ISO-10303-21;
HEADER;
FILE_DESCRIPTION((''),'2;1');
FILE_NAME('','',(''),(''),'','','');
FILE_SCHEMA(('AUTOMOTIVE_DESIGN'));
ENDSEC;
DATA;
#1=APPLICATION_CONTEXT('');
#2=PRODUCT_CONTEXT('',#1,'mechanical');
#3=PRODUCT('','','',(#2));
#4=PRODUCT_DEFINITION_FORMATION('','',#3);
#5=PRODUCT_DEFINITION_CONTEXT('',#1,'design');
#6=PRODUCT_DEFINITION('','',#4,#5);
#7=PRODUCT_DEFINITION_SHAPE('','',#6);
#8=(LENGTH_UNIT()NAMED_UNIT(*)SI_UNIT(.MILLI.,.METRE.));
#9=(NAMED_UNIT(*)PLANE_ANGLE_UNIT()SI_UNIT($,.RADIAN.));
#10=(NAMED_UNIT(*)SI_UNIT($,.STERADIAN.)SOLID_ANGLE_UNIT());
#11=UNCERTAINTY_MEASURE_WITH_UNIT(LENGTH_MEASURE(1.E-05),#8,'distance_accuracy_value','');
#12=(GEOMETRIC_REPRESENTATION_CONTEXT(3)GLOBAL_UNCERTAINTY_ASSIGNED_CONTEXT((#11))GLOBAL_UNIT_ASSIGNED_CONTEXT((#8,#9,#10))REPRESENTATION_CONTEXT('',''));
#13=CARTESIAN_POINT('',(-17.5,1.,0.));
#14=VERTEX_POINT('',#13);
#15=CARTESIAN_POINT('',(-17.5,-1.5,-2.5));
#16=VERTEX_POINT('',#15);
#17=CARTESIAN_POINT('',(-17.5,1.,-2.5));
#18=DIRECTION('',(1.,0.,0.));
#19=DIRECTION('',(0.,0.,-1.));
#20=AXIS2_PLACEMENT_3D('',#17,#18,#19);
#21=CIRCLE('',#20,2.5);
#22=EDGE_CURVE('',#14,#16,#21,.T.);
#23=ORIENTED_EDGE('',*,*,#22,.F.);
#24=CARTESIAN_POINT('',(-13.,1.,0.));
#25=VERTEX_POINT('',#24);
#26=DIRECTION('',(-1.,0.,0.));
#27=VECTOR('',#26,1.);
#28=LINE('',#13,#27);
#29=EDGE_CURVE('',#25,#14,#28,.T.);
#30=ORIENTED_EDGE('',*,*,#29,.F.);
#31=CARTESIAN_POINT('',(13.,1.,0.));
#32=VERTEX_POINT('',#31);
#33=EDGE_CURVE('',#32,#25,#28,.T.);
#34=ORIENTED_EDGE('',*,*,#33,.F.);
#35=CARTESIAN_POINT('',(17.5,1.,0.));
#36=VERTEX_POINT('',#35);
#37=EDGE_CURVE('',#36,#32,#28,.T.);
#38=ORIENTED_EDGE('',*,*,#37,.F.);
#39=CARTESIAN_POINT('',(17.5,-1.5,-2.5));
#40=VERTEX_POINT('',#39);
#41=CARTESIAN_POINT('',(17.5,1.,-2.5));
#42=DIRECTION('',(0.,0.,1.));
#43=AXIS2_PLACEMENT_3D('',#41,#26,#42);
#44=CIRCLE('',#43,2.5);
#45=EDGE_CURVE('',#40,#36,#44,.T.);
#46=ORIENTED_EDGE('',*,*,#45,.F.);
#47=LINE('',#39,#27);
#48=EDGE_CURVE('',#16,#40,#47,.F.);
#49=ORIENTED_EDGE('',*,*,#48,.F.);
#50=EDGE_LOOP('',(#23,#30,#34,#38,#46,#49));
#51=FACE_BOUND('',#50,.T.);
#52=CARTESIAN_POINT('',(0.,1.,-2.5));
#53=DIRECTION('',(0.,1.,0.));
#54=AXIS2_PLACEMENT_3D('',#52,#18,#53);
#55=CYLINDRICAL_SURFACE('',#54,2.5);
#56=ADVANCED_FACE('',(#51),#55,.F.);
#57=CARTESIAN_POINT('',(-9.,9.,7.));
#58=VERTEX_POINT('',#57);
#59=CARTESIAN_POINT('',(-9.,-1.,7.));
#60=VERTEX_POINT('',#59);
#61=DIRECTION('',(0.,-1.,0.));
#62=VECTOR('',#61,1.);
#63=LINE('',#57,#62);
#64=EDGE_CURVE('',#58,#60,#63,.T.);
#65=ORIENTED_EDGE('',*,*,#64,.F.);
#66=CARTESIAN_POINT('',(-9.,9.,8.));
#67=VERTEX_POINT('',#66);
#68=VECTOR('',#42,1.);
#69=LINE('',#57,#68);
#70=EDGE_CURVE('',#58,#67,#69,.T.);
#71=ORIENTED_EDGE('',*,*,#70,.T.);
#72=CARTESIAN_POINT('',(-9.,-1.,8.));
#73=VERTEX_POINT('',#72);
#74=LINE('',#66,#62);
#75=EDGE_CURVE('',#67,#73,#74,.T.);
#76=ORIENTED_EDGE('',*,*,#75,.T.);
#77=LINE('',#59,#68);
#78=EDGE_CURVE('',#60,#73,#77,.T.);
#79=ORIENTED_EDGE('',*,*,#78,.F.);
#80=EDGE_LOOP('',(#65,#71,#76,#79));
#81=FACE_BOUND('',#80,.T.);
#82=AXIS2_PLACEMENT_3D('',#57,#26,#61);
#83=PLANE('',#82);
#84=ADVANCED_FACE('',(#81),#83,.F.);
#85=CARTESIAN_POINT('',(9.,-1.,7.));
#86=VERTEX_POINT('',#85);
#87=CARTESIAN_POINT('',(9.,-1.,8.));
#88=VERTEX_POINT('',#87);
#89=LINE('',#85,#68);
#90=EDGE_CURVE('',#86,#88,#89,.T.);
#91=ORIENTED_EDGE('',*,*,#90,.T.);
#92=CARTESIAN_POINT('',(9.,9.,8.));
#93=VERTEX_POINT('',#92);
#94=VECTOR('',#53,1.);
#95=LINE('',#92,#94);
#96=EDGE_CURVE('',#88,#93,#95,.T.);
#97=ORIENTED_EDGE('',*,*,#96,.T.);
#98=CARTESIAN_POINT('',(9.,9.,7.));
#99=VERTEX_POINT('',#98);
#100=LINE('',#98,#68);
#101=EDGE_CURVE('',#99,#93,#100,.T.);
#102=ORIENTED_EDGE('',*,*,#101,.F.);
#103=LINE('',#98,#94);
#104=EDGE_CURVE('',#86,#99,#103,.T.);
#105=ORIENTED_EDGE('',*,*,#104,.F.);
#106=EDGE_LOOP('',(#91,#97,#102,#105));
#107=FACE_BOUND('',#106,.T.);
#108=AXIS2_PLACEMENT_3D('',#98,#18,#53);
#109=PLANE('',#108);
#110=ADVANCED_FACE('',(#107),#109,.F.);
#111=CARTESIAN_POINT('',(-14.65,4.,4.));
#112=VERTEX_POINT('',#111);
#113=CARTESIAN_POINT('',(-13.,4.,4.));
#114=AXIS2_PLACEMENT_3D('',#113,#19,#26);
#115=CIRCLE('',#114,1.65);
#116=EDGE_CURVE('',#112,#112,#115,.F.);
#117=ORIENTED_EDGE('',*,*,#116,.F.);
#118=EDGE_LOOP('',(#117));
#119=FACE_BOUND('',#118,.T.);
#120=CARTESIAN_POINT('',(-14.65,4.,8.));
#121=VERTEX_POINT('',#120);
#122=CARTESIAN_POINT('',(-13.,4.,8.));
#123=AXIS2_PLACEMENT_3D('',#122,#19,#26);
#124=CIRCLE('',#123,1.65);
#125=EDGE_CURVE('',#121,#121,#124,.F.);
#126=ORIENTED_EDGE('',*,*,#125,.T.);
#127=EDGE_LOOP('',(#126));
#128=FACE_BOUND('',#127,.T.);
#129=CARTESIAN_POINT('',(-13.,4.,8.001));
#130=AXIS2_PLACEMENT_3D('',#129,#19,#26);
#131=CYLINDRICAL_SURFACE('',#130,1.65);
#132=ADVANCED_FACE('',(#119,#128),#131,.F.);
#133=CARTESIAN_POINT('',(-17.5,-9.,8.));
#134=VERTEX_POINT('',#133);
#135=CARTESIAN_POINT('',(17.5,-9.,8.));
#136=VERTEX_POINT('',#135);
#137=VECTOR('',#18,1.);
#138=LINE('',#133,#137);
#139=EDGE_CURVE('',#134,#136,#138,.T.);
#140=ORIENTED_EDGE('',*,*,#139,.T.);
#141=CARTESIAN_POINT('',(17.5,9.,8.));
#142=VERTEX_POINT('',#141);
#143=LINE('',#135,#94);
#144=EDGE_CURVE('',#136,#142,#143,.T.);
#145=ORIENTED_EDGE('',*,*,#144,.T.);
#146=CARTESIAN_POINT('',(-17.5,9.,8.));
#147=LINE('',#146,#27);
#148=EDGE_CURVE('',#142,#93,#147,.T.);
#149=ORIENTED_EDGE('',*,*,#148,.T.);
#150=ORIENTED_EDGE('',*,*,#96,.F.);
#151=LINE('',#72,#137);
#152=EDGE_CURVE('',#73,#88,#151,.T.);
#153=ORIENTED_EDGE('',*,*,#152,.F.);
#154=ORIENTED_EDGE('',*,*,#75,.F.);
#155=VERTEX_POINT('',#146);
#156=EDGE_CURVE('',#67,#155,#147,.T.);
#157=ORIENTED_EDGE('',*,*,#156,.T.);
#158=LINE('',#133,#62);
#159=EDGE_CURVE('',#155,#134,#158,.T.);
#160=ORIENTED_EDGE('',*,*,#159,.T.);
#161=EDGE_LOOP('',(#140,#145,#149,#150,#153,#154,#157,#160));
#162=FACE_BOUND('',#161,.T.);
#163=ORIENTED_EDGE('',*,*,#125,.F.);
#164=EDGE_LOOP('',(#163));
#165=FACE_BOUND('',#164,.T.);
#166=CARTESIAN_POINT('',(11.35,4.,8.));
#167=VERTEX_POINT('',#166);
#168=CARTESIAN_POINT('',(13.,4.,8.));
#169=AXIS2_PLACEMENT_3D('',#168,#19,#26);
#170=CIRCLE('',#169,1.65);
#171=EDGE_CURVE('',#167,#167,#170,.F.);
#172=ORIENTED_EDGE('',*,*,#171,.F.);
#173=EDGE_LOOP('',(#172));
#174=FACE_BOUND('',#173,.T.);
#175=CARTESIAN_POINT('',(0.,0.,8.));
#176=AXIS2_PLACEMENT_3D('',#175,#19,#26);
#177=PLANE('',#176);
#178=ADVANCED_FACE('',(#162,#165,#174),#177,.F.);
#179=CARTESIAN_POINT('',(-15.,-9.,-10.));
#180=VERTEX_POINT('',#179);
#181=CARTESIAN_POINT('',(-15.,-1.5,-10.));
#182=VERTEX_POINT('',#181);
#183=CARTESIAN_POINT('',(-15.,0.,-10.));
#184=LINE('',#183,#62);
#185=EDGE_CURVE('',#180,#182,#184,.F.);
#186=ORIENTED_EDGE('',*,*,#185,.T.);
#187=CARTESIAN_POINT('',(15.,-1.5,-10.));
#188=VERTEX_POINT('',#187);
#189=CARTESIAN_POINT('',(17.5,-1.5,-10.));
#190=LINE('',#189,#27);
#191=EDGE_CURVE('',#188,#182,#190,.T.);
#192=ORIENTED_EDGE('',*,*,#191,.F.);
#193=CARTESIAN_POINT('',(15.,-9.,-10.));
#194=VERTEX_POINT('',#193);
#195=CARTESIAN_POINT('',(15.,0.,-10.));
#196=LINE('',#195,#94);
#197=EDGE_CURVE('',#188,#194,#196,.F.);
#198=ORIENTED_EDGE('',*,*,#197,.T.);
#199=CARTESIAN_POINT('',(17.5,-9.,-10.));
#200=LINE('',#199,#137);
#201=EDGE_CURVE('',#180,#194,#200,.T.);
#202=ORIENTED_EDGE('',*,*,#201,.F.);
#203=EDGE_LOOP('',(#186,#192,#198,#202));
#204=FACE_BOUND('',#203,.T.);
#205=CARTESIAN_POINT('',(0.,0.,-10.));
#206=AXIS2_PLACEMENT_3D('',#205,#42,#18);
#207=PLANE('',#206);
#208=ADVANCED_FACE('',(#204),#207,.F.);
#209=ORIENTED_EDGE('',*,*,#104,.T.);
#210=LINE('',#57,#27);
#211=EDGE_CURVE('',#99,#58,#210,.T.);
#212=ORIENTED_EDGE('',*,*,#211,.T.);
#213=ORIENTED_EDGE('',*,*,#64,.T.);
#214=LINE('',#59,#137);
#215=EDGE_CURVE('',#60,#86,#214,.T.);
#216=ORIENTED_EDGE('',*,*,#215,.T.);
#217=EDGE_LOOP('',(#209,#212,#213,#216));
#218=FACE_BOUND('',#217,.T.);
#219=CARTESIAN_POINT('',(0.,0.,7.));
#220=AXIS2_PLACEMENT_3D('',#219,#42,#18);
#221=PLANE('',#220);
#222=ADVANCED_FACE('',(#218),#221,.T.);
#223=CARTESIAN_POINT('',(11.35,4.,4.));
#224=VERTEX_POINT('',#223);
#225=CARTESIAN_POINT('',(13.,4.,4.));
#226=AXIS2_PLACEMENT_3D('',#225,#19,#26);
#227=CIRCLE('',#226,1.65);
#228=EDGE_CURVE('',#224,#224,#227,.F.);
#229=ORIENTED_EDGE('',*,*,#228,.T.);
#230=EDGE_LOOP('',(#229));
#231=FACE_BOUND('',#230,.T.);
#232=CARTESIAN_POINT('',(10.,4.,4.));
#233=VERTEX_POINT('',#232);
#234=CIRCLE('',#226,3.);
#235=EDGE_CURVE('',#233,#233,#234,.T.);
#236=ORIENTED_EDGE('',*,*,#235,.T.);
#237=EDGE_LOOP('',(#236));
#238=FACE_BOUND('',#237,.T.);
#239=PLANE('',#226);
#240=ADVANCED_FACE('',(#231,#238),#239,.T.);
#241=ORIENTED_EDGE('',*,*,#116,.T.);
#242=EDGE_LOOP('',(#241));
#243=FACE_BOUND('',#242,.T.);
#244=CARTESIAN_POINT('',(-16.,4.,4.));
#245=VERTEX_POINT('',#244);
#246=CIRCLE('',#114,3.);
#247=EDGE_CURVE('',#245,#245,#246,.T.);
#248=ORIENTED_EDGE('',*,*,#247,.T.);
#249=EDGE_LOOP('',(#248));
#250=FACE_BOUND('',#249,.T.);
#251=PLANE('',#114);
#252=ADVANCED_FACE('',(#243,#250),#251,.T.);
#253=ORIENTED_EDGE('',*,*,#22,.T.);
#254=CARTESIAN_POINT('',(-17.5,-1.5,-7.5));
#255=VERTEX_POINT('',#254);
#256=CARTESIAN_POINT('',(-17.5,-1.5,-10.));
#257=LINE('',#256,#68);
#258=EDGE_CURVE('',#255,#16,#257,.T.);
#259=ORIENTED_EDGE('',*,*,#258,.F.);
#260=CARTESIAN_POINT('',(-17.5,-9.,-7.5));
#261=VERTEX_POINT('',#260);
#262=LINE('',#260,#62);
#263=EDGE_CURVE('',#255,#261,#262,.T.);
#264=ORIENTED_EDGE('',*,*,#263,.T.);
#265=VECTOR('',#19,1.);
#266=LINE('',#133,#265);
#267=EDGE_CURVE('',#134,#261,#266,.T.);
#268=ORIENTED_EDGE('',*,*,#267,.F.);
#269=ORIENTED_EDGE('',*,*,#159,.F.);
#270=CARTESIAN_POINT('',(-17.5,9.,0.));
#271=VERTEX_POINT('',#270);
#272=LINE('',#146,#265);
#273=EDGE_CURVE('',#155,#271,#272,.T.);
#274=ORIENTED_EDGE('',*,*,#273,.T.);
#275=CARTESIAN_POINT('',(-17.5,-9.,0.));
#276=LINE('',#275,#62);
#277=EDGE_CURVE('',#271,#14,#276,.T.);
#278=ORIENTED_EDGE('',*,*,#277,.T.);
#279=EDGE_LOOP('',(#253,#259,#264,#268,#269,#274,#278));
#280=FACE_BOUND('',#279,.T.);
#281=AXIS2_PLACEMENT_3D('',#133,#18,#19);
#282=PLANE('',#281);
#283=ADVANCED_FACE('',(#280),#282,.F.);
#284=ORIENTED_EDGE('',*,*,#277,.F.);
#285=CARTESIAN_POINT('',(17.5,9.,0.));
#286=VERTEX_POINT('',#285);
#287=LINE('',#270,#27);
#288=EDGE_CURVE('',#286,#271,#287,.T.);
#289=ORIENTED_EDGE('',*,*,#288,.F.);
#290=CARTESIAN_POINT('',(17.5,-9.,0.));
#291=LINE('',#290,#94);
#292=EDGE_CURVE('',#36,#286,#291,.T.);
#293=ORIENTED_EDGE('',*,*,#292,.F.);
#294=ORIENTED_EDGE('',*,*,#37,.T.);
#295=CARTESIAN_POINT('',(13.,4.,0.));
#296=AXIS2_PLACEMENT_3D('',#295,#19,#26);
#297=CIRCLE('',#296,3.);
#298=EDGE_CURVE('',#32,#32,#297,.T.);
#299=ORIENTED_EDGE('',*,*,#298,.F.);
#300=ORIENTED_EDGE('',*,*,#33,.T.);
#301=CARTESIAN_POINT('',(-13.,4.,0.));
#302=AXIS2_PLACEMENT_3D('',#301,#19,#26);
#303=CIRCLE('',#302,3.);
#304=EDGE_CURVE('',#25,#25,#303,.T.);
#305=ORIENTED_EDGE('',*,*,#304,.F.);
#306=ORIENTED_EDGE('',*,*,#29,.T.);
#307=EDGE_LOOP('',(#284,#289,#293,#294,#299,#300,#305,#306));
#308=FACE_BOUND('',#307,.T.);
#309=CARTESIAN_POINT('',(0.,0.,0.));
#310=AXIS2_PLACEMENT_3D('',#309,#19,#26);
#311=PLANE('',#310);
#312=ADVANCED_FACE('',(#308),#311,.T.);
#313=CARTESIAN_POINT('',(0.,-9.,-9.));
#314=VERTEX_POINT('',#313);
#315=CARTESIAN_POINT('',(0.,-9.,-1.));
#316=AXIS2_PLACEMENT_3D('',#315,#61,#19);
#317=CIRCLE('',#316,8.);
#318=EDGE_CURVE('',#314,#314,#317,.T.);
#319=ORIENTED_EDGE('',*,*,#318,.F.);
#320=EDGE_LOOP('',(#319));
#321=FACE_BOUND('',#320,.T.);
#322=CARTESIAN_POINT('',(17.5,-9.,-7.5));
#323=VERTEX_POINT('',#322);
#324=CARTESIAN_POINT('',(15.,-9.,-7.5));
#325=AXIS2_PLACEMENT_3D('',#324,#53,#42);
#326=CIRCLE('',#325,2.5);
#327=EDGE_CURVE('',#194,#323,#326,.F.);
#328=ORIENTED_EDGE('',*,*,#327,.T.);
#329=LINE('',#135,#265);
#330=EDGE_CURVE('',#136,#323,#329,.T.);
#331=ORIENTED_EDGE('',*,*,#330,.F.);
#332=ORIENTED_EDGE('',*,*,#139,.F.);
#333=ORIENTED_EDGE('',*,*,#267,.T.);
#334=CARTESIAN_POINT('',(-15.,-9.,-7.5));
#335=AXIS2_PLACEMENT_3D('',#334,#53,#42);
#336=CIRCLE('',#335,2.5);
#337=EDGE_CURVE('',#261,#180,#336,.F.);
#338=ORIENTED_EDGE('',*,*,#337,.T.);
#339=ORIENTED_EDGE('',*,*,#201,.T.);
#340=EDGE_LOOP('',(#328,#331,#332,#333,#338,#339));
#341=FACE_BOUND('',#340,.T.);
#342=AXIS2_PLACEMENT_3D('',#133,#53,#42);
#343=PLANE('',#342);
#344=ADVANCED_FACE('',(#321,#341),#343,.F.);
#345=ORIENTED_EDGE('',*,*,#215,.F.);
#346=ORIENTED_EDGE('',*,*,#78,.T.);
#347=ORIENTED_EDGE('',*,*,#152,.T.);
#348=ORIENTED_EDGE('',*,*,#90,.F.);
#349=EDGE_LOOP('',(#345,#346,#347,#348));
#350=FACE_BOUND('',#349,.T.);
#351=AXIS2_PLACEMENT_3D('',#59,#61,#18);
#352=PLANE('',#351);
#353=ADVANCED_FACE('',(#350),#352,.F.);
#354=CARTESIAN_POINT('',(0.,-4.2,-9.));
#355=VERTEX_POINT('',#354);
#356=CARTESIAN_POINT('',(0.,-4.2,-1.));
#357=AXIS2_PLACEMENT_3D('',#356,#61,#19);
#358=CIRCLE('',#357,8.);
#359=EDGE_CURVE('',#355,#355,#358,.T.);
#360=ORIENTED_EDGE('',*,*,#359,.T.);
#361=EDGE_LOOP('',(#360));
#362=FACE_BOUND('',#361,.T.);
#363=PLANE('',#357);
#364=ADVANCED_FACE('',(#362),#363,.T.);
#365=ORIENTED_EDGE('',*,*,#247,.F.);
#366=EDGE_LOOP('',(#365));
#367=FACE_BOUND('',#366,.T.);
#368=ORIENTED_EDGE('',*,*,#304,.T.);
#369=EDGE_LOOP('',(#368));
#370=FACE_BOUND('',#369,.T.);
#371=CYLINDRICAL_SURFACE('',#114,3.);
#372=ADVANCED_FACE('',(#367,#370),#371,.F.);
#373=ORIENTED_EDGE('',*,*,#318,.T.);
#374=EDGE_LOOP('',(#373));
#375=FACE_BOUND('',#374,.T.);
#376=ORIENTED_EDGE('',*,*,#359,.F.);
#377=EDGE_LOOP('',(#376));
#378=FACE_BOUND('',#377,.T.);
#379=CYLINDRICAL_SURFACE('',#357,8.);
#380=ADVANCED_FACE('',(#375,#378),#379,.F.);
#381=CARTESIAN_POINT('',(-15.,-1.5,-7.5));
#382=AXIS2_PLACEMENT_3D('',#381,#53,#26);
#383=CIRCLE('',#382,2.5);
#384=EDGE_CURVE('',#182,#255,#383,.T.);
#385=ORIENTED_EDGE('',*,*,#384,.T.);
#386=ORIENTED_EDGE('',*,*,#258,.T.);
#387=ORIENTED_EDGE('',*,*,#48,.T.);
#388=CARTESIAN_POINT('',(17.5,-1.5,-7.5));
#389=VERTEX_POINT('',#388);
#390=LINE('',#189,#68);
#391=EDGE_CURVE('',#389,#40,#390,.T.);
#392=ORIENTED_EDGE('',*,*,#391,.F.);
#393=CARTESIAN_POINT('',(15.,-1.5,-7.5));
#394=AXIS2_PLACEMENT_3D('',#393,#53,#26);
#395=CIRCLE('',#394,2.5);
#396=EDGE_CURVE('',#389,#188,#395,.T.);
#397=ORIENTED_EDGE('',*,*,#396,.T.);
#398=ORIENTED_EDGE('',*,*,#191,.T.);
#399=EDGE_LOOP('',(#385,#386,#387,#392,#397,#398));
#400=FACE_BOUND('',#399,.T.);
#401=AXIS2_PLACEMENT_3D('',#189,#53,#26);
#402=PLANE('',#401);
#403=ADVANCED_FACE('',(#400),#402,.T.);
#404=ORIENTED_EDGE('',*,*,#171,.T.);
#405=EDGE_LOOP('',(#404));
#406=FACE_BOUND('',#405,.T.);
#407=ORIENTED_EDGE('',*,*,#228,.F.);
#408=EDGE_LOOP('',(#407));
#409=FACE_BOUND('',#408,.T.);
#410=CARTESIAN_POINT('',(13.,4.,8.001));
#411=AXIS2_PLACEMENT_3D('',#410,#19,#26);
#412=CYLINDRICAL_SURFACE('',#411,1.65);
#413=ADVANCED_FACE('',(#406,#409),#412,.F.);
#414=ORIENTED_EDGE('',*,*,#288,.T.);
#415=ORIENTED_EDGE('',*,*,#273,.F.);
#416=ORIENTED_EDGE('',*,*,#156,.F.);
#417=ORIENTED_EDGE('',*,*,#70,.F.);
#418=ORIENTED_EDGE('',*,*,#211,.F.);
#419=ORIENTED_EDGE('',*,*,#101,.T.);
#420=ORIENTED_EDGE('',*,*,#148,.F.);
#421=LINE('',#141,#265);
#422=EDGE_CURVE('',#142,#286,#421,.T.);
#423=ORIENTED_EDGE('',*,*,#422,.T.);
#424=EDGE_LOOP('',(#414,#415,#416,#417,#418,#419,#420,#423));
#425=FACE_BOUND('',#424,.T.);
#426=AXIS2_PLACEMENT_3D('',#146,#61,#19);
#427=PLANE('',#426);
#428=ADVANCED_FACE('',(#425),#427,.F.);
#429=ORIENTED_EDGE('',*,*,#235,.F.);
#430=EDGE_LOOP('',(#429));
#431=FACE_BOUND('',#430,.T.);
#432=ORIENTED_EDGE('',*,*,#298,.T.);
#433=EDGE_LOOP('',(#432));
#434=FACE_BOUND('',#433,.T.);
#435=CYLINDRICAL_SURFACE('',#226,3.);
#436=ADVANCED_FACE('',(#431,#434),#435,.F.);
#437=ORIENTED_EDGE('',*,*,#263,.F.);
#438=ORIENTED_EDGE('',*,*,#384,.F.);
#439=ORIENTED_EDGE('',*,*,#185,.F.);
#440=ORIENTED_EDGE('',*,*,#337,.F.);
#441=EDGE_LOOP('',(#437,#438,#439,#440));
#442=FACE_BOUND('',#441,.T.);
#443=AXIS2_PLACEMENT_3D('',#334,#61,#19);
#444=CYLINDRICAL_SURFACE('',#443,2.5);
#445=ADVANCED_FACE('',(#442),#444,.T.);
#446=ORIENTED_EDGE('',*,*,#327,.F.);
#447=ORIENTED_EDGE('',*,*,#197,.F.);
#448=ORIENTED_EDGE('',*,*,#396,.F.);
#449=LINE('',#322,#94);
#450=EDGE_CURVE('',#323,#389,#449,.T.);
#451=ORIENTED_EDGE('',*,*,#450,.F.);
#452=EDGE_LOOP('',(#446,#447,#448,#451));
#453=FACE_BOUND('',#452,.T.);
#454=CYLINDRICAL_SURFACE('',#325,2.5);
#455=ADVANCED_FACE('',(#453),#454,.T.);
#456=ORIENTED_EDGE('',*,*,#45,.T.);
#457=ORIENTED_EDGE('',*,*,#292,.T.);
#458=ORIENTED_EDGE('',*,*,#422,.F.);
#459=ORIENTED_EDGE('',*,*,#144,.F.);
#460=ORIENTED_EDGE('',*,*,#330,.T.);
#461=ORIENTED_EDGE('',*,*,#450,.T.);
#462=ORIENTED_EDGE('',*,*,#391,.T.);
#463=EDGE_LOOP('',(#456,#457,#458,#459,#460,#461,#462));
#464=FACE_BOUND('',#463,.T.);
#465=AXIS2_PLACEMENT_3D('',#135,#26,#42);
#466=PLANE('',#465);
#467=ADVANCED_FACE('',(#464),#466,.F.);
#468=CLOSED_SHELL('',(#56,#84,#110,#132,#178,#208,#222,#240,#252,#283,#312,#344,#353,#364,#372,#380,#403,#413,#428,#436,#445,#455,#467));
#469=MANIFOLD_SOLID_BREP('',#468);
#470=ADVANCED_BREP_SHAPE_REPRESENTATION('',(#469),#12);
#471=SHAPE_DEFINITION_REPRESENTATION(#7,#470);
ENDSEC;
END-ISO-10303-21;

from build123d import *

# Parameters (mm, degrees)
SKETCH1_W           = 35
SKETCH1_H           = 18
BOSS_EXTRUDE1_DEPTH = 8
SKETCH4_W           = 18
SKETCH4_H           = 10
CUT_EXTRUDE3_DEPTH  = 1
CUT_EXTRUDE2_REACH  = 23.243
SKETCH3_R           = 1.65
SKETCH5_R           = 3
CUT_EXTRUDE4_DEPTH  = 4
SKETCH6_W           = 35
SKETCH6_H           = 7.5
BOSS_EXTRUDE2_DEPTH = 10
SKETCH7_R           = 8
CUT_EXTRUDE5_DEPTH  = 4.8
FILLET1_R           = 2.5


with BuildPart() as part:
    # Sketch1 → Boss-Extrude1 (new body)
    with BuildSketch(Plane.XY):
        Rectangle(SKETCH1_W, SKETCH1_H)
    extrude(amount=BOSS_EXTRUDE1_DEPTH)

    # Sketch4 → Cut-Extrude3 (cut)
    with BuildSketch(Plane.XY.offset(8)):
        with Locations((0, 4)):
            Rectangle(SKETCH4_W, SKETCH4_H)
    extrude(amount=-CUT_EXTRUDE3_DEPTH, mode=Mode.SUBTRACT)

    # Sketch3 → Cut-Extrude2 (cut, up to next)
    with BuildSketch(Plane(origin=(0, 0, 0), x_dir=(-1, 0, 0), z_dir=(0, 0, -1)), mode=Mode.PRIVATE) as cut_extrude2_sk1:
        with Locations((-13, 4)):
            Circle(SKETCH3_R)
    cut_extrude2_tool1 = extrude(cut_extrude2_sk1.sketch, amount=-CUT_EXTRUDE2_REACH, mode=Mode.PRIVATE) & part.part
    # Sketch3 → Cut-Extrude2 (cut, up to next)
    with BuildSketch(Plane(origin=(0, 0, 0), x_dir=(-1, 0, 0), z_dir=(0, 0, -1)), mode=Mode.PRIVATE) as cut_extrude2_sk2:
        with Locations((13, 4)):
            Circle(SKETCH3_R)
    cut_extrude2_tool2 = extrude(cut_extrude2_sk2.sketch, amount=-CUT_EXTRUDE2_REACH, mode=Mode.PRIVATE) & part.part
    add(cut_extrude2_tool1.solids().sort_by_distance((13, 4, 0))[0], mode=Mode.SUBTRACT)
    add(cut_extrude2_tool2.solids().sort_by_distance((-13, 4, 0))[0], mode=Mode.SUBTRACT)

    # Sketch5 → Cut-Extrude4 (cut)
    with BuildSketch(Plane(origin=(0, 0, 0), x_dir=(-1, 0, 0), z_dir=(0, 0, -1))):
        with Locations((-13, 4)):
            Circle(SKETCH5_R)
        with Locations((13, 4)):
            Circle(SKETCH5_R)
    extrude(amount=-CUT_EXTRUDE4_DEPTH, mode=Mode.SUBTRACT)

    # Sketch6 → Boss-Extrude2 (add)
    with BuildSketch(Plane.XY):
        with Locations((0, -5.25)):
            Rectangle(SKETCH6_W, SKETCH6_H)
    extrude(amount=-BOSS_EXTRUDE2_DEPTH)

    # Sketch7 → Cut-Extrude5 (cut)
    with BuildSketch(Plane(origin=(0, -9, 0), x_dir=(-1, 0, 0), z_dir=(0, -1, 0))):
        with Locations(Location((0, 1, 0), (0, 0, 90))):
            Circle(SKETCH7_R)
    extrude(amount=-CUT_EXTRUDE5_DEPTH, mode=Mode.SUBTRACT)

    # Fillet1
    fillet1_edges = [part.edges().sort_by_distance(p)[0] for p in [
        (17.5, -5.25, -10),
        (-17.5, -5.25, -10),
        (0, -1.5, 0),
    ]]
    fillet(fillet1_edges, radius=FILLET1_R - 0.0001)  # a hair under: the kernel refuses the full size


solid = part.part
